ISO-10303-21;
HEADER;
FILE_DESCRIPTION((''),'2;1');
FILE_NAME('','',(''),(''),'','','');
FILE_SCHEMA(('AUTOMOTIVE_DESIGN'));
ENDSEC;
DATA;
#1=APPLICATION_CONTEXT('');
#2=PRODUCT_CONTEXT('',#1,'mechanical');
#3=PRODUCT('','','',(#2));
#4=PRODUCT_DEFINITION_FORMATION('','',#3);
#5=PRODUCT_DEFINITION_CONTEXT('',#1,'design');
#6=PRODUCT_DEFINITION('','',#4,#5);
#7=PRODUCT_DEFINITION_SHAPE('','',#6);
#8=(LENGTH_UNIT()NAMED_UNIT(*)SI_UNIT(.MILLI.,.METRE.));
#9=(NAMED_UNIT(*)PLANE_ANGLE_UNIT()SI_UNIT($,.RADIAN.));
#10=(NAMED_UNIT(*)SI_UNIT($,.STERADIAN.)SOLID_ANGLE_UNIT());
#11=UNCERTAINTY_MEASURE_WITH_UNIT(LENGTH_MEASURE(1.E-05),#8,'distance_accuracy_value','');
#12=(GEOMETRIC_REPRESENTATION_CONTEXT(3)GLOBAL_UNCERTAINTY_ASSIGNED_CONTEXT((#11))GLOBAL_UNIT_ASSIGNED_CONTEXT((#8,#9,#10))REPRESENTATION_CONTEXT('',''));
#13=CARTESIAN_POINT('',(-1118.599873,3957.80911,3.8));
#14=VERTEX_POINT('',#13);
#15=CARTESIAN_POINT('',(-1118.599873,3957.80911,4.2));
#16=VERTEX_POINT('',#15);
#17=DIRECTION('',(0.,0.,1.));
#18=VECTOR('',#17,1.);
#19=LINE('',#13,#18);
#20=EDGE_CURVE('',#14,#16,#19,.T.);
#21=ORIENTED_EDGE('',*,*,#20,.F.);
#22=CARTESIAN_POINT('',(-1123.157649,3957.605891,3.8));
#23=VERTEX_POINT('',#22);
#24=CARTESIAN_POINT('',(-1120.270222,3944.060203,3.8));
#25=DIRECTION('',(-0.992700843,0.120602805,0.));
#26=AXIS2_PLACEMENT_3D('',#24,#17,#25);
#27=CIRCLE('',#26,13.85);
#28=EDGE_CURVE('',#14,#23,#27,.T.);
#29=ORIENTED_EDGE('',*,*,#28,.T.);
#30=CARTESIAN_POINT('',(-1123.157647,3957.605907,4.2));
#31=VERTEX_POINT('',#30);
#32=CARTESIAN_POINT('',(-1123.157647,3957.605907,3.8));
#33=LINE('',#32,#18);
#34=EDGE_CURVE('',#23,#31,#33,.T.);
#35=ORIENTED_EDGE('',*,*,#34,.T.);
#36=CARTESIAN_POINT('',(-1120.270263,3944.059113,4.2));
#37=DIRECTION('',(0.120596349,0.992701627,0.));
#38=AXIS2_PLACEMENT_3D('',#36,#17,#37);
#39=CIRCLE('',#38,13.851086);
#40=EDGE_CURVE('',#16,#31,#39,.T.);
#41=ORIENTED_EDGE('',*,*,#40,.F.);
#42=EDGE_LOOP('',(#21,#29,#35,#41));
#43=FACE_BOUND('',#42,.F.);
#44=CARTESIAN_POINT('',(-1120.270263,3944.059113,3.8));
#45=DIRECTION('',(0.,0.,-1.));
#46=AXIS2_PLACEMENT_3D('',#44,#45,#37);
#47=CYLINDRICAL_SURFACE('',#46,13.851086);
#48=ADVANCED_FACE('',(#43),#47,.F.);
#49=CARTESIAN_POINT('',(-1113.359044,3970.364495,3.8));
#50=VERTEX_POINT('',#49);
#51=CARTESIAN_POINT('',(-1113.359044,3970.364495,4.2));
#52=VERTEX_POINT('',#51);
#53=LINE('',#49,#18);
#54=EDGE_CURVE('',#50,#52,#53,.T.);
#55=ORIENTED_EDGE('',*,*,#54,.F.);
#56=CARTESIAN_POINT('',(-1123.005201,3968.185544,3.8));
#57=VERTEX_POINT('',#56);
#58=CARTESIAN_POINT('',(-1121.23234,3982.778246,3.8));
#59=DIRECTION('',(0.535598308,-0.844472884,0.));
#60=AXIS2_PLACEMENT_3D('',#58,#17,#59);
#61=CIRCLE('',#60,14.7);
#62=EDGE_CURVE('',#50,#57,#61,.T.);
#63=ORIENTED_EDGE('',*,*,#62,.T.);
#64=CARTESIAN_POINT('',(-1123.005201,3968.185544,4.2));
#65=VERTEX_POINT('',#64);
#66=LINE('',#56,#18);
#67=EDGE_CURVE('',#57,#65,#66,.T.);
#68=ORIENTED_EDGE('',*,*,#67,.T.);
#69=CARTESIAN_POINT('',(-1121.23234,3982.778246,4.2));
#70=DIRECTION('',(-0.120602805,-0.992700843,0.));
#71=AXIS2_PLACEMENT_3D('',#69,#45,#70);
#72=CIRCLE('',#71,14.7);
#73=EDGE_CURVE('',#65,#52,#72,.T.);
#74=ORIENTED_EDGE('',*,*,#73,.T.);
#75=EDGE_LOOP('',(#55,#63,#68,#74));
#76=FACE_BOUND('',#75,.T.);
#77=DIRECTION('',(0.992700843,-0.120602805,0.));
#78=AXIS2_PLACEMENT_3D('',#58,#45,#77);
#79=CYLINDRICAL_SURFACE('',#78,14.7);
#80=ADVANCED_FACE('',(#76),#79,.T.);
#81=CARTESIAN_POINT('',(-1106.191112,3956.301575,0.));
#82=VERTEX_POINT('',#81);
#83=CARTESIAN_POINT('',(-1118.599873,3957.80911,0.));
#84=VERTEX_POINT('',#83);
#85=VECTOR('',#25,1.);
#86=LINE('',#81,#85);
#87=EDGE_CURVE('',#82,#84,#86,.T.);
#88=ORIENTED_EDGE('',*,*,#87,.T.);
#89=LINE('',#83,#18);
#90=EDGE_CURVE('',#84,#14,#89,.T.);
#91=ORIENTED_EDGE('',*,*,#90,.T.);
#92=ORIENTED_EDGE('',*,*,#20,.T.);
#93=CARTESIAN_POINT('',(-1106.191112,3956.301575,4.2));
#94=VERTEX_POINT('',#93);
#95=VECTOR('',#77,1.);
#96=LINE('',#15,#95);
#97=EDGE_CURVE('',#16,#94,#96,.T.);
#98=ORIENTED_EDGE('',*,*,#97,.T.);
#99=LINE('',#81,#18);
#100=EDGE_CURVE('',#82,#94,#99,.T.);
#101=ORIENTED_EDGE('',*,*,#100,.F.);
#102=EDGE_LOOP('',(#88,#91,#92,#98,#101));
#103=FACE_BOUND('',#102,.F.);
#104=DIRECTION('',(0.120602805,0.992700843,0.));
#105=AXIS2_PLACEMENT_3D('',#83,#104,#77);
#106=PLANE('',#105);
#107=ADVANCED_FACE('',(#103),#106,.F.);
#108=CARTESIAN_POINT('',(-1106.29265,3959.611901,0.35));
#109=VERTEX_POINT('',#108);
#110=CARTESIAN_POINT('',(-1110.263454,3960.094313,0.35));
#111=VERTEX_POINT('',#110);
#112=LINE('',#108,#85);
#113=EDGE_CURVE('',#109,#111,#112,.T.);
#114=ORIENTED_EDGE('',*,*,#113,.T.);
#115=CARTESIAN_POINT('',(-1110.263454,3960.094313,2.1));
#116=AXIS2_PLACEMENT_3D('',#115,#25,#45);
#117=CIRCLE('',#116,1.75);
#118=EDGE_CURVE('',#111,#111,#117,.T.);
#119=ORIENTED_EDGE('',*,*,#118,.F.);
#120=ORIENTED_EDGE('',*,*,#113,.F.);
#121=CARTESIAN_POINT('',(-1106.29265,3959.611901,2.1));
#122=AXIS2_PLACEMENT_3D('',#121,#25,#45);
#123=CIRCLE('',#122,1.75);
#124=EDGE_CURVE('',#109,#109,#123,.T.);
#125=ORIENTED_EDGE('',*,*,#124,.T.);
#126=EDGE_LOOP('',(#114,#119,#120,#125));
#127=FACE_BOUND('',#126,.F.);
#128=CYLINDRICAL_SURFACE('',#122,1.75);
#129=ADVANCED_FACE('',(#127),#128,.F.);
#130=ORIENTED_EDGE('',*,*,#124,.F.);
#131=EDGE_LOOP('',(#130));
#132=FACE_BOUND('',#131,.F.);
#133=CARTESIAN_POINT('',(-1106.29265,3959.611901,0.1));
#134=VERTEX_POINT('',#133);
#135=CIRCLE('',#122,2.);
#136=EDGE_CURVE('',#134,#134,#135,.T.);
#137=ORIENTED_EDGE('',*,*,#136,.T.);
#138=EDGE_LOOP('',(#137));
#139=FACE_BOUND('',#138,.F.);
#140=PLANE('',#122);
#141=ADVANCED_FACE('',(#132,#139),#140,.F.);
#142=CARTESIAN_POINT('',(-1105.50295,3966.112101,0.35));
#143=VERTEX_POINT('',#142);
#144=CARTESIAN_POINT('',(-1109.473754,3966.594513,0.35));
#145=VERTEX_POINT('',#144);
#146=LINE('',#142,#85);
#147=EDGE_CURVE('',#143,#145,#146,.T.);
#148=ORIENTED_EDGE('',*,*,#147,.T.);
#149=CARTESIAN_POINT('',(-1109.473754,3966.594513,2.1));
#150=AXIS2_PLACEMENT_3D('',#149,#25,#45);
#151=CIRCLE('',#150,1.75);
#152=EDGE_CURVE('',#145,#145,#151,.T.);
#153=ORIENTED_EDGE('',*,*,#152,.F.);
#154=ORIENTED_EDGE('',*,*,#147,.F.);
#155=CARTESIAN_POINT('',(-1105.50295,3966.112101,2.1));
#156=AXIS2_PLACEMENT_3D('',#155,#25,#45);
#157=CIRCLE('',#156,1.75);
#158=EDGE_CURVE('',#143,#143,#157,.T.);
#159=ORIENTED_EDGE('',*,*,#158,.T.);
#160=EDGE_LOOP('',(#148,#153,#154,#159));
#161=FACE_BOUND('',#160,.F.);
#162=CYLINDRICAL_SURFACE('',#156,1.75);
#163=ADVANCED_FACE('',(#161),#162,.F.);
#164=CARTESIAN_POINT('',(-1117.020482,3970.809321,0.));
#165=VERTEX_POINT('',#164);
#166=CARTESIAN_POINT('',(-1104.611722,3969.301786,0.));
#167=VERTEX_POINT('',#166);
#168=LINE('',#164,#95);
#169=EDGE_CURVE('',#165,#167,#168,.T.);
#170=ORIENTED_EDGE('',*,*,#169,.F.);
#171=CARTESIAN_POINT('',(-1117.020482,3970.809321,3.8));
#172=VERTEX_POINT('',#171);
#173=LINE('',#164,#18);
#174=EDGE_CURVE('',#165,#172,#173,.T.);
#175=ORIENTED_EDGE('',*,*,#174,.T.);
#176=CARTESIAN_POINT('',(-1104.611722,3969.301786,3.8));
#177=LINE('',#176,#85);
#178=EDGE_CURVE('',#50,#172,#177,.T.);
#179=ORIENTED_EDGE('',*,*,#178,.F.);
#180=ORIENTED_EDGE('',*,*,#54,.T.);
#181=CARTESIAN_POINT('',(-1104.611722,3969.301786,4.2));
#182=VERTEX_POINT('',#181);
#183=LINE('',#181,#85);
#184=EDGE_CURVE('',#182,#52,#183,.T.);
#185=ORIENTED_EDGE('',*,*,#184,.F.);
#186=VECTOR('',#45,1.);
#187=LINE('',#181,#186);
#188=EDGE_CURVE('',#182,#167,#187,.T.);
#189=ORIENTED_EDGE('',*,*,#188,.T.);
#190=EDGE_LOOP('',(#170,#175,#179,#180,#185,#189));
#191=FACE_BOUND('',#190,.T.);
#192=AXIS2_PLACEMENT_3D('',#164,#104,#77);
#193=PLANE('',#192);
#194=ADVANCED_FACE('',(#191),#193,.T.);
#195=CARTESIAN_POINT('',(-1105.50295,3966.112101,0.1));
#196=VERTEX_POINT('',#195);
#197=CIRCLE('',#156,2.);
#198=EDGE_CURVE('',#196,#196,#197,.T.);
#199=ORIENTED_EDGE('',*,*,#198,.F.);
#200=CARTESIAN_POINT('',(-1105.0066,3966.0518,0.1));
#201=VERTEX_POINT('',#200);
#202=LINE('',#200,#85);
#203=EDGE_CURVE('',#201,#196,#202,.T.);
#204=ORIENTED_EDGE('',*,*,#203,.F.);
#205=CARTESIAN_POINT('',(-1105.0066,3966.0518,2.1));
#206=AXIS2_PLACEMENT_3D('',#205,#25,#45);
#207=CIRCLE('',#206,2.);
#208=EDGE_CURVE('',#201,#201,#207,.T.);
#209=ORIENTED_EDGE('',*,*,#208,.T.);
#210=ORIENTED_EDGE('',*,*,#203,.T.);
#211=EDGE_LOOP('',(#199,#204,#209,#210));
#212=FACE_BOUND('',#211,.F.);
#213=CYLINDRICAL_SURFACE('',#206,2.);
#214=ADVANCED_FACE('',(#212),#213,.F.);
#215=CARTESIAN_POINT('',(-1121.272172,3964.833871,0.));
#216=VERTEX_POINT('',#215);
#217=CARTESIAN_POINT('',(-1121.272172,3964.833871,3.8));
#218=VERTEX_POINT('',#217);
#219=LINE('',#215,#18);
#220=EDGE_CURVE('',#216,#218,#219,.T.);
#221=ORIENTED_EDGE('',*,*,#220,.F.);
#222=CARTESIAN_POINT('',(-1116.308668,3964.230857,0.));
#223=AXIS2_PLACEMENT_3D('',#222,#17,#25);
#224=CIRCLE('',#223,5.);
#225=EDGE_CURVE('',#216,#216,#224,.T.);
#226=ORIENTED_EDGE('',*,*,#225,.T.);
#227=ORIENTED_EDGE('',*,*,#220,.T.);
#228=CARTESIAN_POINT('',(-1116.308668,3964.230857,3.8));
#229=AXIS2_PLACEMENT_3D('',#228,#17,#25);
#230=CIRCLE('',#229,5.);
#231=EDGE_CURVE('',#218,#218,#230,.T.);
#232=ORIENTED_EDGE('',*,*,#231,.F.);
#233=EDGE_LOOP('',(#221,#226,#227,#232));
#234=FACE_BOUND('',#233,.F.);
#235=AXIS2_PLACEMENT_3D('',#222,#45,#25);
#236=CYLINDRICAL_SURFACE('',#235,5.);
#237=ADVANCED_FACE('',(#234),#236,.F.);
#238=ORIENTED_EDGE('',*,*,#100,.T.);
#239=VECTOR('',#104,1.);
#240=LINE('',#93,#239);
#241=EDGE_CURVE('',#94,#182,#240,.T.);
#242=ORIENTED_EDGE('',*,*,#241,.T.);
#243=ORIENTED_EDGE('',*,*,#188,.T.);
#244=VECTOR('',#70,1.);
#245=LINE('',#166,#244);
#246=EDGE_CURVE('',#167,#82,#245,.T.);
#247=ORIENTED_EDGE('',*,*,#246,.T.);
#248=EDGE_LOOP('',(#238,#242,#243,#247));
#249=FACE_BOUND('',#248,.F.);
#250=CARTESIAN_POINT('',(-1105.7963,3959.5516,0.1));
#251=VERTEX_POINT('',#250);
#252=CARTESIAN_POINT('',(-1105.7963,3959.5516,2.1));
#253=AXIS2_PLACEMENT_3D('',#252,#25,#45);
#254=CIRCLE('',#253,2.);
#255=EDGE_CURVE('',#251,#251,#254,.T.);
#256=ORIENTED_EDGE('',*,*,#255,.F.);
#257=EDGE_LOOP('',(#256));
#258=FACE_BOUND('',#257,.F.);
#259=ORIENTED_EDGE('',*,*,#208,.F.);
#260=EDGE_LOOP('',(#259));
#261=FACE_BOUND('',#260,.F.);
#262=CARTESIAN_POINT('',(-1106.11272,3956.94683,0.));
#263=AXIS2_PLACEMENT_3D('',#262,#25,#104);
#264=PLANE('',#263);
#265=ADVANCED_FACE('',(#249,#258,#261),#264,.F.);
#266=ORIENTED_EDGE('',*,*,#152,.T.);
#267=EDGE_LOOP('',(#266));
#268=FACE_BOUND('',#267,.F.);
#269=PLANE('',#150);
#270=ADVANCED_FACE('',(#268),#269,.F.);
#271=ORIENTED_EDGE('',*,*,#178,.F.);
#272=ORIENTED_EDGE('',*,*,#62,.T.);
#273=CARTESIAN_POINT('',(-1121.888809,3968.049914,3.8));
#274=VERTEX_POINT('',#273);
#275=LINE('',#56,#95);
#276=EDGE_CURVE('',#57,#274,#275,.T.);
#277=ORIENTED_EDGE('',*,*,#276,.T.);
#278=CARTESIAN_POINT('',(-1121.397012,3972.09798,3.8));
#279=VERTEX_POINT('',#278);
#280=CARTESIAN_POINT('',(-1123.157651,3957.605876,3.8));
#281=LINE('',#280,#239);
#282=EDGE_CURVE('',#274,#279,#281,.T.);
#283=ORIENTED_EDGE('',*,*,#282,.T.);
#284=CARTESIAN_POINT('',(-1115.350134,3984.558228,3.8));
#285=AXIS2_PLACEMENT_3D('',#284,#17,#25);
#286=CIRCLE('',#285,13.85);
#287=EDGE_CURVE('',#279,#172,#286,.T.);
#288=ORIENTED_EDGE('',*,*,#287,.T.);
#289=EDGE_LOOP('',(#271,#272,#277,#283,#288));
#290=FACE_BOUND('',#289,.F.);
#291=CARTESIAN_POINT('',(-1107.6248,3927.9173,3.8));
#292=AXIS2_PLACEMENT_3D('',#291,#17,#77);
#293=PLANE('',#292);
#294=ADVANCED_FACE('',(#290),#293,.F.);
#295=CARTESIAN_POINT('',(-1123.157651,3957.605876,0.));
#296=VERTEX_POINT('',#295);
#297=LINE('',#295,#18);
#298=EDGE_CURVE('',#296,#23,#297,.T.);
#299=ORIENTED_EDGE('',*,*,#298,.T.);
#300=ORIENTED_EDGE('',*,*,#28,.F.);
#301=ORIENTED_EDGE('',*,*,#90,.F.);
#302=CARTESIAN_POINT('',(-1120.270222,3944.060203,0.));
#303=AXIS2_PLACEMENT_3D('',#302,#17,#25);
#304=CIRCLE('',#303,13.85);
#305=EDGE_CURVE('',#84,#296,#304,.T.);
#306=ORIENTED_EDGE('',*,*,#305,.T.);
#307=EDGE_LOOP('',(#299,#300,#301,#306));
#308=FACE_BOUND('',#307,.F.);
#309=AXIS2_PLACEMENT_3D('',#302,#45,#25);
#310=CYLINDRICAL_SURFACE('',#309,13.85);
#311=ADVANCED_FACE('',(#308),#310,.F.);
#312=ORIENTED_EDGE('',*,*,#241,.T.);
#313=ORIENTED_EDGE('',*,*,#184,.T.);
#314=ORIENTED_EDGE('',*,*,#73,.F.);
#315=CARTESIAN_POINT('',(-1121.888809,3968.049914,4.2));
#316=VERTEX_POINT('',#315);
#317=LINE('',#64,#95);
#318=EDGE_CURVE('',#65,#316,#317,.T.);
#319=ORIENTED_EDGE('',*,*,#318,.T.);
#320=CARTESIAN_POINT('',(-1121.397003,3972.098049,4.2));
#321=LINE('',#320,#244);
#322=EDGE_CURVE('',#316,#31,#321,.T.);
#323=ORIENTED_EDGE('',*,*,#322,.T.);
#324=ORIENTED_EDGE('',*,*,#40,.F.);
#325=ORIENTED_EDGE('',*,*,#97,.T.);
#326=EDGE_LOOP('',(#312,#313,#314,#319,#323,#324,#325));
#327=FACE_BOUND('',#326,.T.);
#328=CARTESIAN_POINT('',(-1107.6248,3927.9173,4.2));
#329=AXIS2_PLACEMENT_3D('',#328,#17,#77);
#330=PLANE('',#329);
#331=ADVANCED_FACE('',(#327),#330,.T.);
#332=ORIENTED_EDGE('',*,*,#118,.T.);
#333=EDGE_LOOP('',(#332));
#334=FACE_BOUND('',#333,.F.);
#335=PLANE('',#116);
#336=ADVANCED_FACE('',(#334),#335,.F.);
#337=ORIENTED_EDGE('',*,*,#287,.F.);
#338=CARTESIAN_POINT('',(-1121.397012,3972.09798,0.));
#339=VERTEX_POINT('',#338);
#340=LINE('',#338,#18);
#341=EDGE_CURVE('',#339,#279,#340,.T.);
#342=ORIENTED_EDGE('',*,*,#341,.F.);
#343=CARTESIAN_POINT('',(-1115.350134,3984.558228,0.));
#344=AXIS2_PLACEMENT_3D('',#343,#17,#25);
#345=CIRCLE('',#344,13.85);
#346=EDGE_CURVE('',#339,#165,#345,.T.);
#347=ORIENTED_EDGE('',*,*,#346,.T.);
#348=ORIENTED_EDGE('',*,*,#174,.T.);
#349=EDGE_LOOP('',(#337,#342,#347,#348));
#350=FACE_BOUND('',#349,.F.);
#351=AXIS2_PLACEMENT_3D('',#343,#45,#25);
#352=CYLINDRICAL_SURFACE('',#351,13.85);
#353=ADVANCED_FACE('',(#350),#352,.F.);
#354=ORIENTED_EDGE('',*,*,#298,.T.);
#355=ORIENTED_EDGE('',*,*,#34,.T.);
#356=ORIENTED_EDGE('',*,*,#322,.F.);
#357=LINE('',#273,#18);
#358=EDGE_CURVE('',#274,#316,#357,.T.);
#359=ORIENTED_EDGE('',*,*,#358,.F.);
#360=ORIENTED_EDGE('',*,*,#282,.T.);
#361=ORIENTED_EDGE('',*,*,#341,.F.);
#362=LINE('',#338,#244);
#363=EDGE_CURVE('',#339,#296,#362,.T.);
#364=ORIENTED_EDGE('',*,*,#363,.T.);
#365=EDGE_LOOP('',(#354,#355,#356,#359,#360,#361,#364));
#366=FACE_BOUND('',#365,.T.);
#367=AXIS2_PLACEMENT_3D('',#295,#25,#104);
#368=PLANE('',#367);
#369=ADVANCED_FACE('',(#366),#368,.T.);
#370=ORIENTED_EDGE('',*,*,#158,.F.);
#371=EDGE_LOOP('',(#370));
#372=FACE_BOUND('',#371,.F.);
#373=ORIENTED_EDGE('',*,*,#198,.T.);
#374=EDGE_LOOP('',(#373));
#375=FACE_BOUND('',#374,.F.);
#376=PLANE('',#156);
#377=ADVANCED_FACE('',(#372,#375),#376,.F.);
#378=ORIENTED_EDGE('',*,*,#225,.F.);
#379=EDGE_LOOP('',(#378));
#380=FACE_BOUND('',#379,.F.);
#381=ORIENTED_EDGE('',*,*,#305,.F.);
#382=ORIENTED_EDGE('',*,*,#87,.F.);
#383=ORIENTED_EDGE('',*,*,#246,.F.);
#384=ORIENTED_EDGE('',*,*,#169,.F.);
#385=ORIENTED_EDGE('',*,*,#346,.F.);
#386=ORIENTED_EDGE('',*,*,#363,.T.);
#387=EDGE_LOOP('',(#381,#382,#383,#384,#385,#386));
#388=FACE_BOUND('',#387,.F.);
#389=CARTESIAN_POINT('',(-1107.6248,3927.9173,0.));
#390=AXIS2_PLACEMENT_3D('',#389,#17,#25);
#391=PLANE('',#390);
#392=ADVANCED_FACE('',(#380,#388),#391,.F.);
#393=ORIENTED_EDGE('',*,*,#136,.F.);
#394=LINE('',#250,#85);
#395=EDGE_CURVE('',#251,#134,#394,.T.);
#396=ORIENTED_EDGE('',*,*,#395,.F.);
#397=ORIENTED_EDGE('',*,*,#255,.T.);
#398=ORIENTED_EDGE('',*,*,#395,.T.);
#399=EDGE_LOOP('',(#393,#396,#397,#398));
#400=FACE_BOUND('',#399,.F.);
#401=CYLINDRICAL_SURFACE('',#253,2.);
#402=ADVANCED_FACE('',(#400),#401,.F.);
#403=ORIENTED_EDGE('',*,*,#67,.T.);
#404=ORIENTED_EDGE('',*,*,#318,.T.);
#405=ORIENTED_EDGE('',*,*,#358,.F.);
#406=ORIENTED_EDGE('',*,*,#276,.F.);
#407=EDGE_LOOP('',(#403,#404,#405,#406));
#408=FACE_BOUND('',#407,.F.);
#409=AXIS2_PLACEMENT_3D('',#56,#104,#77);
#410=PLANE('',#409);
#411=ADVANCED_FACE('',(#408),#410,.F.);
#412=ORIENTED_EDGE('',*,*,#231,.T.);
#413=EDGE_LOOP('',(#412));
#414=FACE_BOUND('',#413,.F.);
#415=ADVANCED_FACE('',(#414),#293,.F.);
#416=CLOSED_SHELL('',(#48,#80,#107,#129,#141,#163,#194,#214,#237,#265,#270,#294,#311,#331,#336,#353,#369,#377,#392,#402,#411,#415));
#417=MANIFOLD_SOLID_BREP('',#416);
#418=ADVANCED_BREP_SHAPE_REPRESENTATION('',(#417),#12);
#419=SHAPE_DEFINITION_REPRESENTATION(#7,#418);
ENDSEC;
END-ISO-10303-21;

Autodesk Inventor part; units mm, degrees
ref_plane "Work Plane1" through (-1107.6248, 3927.9173, 0) normal (0, 0, 1) x (-0.9927008, 0.1206028, 0)
sketch "Sketch1" plane through (-1107.6248, 3927.9173, 0) normal (0, 0, 1) x (-0.9927008, 0.1206028, 0)
  circle A0 centre (14.5, -14.5) radius 13.85 projected
  circle A1 centre (14.5, -14.5) radius 14.5 projected
  circle A2 centre (14.5, -55.2958) radius 13.85 projected
  circle A3 centre (14.5, -55.2958) radius 14.5 projected
  circle A4 centre (13, -35.0012) radius 5 projected
  line L0 (0, 0) -> (29, 0)
  line L1 (29, 0) -> (29, -67)
  line L2 (29, -67) -> (0, -67)
  line L3 (0, -67) -> (0, 0)
  line L4 (2, 0) -> (2, -67)
  line L5 (14.5, -28.35) -> (2, -28.35)
  line L6 (14.5, -29) -> (2, -29)
  line L7 (14.5, -40.7958) -> (2, -40.7958)
  line L8 (14.5, -41.4458) -> (2, -41.4458)
  line L9 (19, 0) -> (19, -67)
  point P0 (-1573.2578, 3765.6642)
  point P1 (19, -42.1973)
  point P2 (19, -27.5986)
  point P3 (19, -41.5118)
  point P4 (19, -28.284)
  dimension "d0" = 67
  dimension "d1" = 2
  dimension "d2" = 1
ref_plane "Work Plane7" through (-17.5791, -32.927, 3.4) normal (0, 0, -1) x (0.0194385, 0.9998111, 0)
extrude "Extrusion1" add sketch "Sketch1" along normal blind 3.8 contours L9 A1 L5 A0 | L9 A3 L7 L4 L6 A1 | A1 L6 L4 L5 | L9 A2 L8 A3 | A3 L8 L4 L7
ref_plane "Work Plane8" through (-22.6017, 2.8462, 4) normal (0, 0, -1) x (0.4990785, 0.8665568, 0)
ref_plane "Work Plane9" through (151.4324, -161.9595, 4) normal (0, 0, 1) x (0.0950598, 0.9954716, 0)
sketch "Sketch2" plane through (-1107.6248, 3927.9173, 3.8) normal (0, 0, 1) x (0.9927008, -0.1206028, 0)
  arc A0 (-19, 42.1973) -> (-14.5, 41.4458) centre (-14.5, 55.2958) ccw projected
  line L0 (-19, 42.1973) -> (-19, 27.5986) projected
  arc A1 (-14.5, 28.35) -> (-19, 27.5986) centre (-14.5, 14.5) ccw projected
  line L1 (-14.5, 28.35) -> (-2, 28.35) projected
  line L2 (-2, 28.35) -> (-2, 41.4458) projected
  line L3 (-2, 41.4458) -> (-14.5, 41.4458) projected
  circle A2 centre (-13, 35.0012) radius 5 projected
  circle A3 centre (-20.1246, 52.8194) radius 14.7 projected
  line L4 (-20.1246, 38.1194) -> (-2, 38.1194)
  line L5 (-2, 28.35) -> (-2, 41.4458) projected
  line L6 (-20.1246, 52.8194) -> (-20.1246, 38.1194)
  point P0 (-2, 38.1194)
  point P1 (-19, 38.1625)
  point P2 (-10.8116, 41.4458)
  point P3 (-19, 38.1194)
extrude "Extrusion4" add sketch "Sketch2" along normal blind 0.4
sketch "Sketch3" plane through (-1106.1911, 3956.3016, 0) normal (0.9927008, -0.1206028, 0) x (0, 0, -1)
  line L0 (0, 0) -> (-4.2, 0) projected
  line L1 (0, 0) -> (0, 13.0958) projected
  line L2 (0, 13.0958) -> (-4.2, 13.0958) projected
  line L3 (-4.2, 6.5479) -> (0, 6.5479)
  line L4 (-4.2, 6.5479) -> (0, 0)
  line L5 (-4.2, 6.5479) -> (0, 13.0958)
  line L6 (0, 6.5479) -> (-2.1, 9.8219)
  line L7 (0, 6.5479) -> (-2.1, 3.274)
  line L8 (-4.2, 0) -> (-4.2, 13.0958) projected
  point P0 (0, -3794.0142)
  dimension "d11" = 6.5479
  dimension "d12" = 6.5479
hole "Hole1" at (-1105.7963, 3959.5516, 2.1) at (-1105.0066, 3966.0518, 2.1) direction (-0.9927008, 0.1206028, 0) diameter 3.5 depth 4.5 counterbore diameter 4 counterbore depth 0.5
equation "\"d11\" = d12"
properties part number "BearigHold"
